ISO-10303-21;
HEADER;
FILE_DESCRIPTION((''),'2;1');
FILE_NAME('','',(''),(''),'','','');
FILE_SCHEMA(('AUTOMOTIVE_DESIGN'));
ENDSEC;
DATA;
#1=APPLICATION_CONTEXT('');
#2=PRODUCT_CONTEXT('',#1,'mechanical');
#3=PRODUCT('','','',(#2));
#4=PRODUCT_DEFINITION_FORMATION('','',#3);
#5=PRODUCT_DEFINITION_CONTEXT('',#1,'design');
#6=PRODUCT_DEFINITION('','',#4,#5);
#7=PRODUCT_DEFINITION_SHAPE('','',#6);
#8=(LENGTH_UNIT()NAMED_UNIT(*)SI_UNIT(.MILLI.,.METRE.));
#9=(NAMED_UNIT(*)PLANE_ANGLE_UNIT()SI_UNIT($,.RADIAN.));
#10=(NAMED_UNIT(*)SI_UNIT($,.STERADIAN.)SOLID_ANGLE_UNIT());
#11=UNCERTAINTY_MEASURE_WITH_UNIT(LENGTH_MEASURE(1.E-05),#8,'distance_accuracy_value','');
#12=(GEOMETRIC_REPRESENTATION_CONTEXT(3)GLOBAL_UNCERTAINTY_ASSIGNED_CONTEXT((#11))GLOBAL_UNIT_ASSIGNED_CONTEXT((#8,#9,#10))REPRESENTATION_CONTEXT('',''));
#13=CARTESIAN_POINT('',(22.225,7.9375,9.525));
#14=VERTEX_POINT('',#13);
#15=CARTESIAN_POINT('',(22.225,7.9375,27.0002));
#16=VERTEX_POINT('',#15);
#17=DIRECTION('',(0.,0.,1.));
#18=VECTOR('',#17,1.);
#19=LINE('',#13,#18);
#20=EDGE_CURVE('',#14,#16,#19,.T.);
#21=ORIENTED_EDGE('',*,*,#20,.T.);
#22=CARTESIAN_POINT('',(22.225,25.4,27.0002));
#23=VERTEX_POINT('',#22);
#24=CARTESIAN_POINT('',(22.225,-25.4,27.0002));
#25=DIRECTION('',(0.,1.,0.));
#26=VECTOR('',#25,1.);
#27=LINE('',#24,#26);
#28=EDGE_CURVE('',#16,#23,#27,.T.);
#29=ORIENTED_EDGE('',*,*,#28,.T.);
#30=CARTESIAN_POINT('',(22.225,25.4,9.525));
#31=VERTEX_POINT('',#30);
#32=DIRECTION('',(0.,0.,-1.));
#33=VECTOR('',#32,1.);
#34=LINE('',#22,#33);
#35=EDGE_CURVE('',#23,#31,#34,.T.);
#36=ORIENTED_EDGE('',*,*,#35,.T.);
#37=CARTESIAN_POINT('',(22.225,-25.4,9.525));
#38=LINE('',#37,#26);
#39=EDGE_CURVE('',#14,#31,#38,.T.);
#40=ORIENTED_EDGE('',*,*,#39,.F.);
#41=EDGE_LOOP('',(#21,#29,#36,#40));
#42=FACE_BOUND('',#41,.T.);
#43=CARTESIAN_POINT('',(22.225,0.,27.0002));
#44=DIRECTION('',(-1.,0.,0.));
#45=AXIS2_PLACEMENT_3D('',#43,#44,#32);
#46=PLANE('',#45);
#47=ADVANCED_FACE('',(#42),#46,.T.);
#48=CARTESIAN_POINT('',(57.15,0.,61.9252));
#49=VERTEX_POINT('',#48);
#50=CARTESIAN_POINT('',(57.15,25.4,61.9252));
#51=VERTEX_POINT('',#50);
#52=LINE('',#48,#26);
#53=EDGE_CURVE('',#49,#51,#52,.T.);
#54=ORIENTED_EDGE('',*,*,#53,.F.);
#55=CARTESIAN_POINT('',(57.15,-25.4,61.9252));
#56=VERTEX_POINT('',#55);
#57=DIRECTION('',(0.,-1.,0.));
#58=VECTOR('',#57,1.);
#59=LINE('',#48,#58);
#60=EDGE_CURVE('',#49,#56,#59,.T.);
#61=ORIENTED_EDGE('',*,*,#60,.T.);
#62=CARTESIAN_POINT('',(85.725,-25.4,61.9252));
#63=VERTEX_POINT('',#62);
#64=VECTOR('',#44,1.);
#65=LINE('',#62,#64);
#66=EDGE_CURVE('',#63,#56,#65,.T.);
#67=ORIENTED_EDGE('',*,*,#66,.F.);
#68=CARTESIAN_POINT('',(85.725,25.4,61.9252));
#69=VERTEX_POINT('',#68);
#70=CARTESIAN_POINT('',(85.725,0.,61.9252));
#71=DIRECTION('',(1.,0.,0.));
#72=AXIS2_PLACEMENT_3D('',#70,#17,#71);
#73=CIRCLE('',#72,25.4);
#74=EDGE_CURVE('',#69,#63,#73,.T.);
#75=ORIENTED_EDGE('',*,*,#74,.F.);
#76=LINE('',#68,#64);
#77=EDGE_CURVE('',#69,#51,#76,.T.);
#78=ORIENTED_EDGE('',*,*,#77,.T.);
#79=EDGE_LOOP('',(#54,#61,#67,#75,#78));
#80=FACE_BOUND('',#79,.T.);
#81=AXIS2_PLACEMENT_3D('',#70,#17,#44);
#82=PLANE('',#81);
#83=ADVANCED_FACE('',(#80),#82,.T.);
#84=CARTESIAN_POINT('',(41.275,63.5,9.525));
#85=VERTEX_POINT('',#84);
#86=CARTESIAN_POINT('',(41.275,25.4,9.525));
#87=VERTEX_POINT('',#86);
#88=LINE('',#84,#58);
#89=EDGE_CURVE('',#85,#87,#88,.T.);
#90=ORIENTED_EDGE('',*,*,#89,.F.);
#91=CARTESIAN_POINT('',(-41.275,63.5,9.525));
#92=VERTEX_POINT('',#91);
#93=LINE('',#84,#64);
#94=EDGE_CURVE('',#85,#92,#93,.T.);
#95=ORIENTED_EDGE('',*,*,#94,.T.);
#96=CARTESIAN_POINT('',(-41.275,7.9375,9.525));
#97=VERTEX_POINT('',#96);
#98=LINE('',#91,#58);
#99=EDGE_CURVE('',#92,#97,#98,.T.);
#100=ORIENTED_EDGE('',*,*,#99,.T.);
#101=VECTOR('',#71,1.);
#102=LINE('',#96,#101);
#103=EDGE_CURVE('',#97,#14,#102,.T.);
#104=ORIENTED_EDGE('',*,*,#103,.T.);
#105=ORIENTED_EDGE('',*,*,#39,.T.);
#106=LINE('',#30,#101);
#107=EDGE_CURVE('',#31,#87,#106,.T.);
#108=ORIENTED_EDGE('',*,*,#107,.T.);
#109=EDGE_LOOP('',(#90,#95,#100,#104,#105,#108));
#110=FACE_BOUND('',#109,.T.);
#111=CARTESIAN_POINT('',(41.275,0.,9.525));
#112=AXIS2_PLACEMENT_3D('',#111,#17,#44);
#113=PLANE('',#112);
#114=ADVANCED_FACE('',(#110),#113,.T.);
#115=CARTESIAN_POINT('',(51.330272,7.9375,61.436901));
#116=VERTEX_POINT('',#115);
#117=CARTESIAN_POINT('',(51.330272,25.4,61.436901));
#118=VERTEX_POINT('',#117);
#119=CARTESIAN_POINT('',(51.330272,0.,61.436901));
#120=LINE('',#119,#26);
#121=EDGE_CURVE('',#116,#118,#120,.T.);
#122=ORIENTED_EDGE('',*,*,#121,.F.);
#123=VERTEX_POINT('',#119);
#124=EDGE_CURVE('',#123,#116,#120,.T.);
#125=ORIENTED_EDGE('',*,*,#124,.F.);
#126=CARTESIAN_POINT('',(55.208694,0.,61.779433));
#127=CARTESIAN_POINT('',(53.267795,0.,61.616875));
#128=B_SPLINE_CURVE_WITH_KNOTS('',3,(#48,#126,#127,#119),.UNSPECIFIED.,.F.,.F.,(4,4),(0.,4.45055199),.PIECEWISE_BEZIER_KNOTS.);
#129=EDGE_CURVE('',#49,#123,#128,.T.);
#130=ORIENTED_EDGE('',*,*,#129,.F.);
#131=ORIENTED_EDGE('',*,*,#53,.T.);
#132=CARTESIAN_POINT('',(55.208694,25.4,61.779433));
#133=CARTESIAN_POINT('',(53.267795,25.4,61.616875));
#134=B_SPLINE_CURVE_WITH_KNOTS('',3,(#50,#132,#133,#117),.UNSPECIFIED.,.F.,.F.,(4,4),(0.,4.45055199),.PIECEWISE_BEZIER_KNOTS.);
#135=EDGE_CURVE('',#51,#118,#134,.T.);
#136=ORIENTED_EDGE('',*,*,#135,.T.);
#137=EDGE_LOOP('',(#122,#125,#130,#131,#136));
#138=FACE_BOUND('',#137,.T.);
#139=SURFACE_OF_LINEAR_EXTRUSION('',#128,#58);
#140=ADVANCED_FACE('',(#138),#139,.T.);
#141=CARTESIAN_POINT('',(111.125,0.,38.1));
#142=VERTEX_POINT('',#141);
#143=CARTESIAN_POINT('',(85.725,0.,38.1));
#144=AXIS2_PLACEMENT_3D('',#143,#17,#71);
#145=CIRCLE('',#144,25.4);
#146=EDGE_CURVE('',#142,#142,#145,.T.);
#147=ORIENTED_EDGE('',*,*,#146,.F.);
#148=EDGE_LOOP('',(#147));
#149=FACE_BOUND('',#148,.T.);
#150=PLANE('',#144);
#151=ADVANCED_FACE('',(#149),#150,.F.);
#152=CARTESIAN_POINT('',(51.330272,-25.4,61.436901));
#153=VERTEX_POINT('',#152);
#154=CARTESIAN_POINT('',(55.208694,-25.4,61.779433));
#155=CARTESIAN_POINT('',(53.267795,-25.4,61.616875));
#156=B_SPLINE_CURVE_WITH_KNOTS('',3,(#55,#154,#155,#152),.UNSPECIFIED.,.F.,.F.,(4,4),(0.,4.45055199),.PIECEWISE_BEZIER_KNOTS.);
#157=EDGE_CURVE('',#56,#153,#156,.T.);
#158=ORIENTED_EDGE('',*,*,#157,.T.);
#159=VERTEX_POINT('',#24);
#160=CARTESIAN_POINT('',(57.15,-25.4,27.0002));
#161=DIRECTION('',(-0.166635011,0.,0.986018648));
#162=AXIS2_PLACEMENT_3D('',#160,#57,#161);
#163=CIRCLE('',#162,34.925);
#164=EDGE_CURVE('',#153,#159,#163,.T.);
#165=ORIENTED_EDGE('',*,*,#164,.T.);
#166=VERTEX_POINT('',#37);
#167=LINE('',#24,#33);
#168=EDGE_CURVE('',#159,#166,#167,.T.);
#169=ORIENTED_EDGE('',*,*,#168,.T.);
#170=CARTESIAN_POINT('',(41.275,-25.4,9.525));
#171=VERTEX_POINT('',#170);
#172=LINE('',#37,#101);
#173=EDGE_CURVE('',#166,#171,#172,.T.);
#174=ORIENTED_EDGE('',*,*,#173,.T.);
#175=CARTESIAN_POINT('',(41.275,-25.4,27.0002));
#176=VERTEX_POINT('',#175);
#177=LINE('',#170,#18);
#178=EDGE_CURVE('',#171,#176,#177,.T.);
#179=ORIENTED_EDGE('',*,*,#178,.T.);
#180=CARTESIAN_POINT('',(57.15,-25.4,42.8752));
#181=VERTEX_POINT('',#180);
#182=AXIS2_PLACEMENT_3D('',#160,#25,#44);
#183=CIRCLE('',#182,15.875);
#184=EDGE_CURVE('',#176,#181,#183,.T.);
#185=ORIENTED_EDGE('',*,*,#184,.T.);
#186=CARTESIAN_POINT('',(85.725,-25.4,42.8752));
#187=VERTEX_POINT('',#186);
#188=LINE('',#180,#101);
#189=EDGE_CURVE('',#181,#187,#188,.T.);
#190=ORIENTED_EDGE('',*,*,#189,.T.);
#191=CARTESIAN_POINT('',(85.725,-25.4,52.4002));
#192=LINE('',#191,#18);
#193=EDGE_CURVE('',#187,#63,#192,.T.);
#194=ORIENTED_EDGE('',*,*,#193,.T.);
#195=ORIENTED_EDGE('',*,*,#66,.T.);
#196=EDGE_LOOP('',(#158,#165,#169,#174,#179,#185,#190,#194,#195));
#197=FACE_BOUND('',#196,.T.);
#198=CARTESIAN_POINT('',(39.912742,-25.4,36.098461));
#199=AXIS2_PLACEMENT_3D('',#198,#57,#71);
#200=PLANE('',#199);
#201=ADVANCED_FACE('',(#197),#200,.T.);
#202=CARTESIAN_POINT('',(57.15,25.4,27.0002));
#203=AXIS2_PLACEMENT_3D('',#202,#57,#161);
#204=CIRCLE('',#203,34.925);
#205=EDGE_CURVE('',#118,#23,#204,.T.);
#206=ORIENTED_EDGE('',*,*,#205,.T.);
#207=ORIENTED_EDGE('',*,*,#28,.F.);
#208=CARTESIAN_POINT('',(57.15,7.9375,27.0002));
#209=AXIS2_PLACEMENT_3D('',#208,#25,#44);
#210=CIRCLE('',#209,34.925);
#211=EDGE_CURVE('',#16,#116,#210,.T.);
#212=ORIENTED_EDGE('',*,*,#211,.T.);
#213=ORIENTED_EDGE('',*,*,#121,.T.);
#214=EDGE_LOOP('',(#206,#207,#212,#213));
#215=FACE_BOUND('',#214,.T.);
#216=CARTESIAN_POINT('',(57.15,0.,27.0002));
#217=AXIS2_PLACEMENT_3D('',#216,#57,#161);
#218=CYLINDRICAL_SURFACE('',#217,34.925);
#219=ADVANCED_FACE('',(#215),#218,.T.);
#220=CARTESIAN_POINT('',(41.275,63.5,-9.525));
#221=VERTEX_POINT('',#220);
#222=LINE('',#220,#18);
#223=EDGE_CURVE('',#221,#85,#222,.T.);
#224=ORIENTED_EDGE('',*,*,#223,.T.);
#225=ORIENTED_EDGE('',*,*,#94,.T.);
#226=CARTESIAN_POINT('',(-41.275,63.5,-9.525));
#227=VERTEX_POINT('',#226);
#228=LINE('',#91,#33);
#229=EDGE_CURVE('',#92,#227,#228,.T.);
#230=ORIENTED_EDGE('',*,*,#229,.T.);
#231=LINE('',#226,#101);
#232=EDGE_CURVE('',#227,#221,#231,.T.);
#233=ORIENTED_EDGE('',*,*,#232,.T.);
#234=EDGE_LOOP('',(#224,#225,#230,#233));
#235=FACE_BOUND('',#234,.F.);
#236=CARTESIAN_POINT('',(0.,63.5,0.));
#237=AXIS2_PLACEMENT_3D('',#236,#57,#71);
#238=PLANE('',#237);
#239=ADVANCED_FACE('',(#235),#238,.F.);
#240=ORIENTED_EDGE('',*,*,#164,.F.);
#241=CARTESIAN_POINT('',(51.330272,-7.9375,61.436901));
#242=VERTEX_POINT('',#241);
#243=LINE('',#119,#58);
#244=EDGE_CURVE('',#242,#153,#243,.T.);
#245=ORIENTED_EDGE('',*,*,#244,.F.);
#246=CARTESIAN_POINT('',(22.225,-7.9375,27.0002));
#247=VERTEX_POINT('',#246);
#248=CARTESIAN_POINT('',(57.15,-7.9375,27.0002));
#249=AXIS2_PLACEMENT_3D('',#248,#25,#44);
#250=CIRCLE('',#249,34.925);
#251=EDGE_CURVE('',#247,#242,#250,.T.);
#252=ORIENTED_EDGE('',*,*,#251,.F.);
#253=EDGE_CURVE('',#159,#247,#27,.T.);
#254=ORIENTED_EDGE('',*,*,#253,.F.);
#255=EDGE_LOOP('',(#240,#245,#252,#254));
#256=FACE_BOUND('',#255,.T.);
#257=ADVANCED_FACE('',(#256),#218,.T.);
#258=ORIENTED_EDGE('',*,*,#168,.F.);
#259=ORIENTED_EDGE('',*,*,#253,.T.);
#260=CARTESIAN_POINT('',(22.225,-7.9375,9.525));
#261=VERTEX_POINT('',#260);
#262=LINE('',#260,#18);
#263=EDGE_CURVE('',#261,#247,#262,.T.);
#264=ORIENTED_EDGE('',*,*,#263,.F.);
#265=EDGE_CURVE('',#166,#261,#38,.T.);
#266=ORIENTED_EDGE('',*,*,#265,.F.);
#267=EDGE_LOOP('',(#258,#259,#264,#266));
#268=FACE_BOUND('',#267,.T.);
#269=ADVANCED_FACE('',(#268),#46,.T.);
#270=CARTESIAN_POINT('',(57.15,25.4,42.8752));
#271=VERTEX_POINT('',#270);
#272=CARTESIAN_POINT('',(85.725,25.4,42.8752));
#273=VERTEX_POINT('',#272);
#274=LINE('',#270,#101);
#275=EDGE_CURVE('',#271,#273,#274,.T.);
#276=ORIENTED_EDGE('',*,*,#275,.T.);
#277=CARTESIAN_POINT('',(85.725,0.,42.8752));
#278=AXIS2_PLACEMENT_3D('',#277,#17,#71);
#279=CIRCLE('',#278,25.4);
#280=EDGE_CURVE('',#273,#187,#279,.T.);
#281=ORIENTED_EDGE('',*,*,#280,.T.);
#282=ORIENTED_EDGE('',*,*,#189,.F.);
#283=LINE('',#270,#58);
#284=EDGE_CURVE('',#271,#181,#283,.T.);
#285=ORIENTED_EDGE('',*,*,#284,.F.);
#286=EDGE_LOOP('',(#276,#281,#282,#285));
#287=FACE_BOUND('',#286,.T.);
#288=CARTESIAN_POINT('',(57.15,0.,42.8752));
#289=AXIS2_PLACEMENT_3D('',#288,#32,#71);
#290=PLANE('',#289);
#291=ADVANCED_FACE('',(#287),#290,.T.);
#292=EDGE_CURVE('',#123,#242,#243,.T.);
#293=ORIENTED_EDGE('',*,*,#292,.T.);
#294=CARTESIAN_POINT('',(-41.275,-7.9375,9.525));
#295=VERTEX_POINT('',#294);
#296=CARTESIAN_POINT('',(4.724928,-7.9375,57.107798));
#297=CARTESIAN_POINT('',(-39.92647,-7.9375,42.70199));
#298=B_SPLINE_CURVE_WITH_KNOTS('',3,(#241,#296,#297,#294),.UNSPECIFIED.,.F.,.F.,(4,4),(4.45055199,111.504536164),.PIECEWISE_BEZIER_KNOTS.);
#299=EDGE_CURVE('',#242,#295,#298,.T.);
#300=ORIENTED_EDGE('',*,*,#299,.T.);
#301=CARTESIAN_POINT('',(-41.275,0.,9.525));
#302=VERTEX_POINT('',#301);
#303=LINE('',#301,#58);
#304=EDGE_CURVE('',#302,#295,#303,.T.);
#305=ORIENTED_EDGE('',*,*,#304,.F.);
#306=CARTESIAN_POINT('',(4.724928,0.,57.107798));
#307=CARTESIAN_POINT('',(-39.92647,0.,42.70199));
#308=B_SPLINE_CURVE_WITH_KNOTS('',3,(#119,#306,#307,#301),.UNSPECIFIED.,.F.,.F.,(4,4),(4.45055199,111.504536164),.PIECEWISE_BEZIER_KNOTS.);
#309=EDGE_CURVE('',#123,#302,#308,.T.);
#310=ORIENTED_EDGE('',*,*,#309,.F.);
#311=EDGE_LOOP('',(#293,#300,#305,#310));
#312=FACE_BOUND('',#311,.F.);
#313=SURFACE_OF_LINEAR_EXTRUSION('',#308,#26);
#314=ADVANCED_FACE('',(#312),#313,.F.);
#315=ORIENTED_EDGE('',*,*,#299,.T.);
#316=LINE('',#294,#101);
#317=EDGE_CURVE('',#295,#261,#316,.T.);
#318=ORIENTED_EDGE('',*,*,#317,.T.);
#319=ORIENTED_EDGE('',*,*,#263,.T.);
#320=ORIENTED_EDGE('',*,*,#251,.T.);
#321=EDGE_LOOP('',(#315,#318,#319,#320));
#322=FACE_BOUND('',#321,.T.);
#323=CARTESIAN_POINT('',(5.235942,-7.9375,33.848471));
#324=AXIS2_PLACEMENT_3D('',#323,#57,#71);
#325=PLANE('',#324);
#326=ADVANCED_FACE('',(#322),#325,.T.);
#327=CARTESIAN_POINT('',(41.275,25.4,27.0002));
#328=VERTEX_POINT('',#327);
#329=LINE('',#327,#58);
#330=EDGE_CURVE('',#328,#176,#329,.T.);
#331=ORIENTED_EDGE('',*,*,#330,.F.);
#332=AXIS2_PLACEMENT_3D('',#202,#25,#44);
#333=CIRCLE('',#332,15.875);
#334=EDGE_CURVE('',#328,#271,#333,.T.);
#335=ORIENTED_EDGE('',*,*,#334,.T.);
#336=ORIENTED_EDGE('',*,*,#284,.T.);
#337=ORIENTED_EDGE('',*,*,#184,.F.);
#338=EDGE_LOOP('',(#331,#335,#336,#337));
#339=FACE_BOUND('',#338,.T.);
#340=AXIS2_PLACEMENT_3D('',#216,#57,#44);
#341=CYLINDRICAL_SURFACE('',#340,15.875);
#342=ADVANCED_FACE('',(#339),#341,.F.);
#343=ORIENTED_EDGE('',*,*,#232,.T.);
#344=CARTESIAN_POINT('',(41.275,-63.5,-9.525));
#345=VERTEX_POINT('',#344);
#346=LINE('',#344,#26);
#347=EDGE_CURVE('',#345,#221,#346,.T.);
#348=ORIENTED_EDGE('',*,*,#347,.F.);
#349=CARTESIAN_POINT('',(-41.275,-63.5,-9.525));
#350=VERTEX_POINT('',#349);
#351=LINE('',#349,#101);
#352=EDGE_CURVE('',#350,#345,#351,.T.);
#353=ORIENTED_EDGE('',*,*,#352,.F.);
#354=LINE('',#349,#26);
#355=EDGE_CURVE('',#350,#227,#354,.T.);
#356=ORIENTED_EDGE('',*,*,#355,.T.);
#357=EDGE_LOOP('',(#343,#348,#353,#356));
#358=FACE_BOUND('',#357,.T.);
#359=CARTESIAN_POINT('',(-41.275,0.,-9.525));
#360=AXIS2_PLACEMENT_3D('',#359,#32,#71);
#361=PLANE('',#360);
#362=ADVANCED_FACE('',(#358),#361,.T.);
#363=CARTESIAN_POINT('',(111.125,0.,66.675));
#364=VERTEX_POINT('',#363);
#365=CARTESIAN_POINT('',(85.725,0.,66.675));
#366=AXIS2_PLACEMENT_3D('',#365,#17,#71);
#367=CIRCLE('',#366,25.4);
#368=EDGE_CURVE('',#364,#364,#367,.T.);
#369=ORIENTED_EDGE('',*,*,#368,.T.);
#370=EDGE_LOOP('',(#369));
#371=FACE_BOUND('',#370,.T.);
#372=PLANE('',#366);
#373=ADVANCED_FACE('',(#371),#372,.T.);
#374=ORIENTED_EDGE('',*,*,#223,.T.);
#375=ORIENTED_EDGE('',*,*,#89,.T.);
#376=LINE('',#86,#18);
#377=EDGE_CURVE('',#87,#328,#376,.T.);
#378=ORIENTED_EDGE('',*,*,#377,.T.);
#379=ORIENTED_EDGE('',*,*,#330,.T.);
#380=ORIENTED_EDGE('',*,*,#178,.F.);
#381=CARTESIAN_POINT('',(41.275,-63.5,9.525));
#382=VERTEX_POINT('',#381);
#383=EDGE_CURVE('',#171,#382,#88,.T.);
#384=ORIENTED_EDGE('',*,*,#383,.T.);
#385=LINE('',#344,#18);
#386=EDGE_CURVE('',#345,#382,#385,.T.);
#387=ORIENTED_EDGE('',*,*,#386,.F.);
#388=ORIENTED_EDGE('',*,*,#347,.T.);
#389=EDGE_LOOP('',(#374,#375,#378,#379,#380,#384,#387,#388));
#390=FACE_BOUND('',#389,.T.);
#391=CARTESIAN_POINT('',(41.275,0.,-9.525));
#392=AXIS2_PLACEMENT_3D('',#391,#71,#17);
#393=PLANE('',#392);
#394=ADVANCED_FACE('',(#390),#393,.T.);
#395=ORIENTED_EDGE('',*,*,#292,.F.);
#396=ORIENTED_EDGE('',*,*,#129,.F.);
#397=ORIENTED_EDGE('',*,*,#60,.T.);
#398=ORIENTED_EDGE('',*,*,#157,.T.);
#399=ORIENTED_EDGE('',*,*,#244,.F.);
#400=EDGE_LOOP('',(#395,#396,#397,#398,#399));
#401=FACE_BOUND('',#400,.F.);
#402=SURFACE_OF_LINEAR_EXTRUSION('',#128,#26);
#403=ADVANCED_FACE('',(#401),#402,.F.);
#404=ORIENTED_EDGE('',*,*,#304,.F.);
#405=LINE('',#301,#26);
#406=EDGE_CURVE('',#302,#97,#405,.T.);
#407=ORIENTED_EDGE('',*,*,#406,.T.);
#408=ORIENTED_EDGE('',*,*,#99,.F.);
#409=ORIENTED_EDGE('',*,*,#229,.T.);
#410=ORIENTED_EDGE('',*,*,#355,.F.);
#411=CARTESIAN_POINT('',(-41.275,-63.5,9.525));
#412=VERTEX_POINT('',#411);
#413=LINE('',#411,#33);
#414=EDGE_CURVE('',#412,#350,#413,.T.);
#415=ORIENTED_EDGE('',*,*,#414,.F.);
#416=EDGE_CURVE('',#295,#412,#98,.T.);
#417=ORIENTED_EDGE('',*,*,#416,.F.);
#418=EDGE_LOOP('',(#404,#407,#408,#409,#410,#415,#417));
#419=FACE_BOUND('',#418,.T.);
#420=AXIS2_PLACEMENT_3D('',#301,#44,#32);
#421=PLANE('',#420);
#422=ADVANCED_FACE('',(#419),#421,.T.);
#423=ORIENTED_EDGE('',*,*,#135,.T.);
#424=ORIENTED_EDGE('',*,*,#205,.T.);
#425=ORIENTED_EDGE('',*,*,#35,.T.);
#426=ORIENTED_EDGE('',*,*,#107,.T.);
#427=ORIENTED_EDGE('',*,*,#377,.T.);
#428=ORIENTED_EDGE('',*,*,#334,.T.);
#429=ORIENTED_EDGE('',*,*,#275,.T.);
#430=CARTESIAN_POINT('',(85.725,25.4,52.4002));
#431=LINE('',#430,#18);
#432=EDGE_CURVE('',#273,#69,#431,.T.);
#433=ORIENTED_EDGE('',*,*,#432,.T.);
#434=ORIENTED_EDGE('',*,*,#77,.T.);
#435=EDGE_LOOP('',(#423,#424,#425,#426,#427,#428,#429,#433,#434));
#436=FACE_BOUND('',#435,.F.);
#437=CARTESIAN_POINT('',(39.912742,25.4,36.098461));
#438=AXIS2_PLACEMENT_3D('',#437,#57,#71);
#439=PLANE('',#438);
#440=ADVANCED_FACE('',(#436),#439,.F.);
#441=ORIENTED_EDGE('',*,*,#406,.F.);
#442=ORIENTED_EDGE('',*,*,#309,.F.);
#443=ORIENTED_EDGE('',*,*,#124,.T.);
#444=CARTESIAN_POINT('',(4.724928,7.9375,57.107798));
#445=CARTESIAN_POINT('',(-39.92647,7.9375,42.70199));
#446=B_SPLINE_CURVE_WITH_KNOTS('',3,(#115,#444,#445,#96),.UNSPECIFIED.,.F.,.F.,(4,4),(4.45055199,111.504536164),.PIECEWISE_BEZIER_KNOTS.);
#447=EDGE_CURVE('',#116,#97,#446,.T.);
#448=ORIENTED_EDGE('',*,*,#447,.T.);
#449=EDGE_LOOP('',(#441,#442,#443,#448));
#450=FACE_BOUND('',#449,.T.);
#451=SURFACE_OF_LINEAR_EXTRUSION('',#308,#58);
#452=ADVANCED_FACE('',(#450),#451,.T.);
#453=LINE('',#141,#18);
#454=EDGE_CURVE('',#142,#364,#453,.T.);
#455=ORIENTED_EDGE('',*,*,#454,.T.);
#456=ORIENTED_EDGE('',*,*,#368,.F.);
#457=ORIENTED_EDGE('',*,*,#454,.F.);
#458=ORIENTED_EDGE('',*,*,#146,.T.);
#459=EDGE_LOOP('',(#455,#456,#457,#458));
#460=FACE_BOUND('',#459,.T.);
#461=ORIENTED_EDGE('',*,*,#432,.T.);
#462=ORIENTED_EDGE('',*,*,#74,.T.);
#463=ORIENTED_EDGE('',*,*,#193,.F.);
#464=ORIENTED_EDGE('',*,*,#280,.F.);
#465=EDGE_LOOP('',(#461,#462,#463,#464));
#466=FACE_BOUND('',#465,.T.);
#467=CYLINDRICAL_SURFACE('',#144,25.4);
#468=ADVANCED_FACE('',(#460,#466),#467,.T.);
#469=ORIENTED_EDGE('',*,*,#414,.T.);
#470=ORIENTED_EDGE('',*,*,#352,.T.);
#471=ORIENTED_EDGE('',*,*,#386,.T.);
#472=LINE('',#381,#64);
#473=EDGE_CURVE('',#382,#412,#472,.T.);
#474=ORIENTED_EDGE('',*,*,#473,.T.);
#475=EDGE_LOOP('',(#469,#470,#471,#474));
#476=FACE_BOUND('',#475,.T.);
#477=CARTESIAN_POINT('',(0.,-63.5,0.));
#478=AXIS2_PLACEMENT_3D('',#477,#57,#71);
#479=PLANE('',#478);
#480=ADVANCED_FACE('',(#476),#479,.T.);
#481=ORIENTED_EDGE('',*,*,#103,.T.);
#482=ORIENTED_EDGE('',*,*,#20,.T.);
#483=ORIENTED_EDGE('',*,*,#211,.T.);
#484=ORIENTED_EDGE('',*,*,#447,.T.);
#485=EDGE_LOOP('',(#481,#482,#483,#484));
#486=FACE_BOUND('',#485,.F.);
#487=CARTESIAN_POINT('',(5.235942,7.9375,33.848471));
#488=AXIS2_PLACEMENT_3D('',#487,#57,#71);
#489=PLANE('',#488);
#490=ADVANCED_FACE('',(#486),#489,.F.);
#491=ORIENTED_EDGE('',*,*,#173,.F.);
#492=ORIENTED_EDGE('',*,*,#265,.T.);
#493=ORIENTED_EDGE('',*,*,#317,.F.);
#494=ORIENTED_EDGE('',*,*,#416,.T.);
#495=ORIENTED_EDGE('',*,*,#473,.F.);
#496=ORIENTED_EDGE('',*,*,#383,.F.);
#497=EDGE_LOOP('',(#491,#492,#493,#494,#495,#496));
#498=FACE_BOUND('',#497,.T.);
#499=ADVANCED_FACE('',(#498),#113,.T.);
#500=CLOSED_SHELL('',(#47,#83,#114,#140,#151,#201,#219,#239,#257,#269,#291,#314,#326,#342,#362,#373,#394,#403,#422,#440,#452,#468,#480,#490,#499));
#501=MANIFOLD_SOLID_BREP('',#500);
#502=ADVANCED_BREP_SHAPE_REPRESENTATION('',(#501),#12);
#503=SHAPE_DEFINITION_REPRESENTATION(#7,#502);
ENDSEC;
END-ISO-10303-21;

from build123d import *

# Parameters (mm, degrees)
F1_DEPTH = 63.5
F0_W     = 25.4
F0_H     = 19.05
F2_DEPTH = 25.4
F3_DEPTH = 7.9375


with BuildPart() as f1:
    # F0 (on Front) → F1 (new body, symmetric)
    with BuildSketch(Plane.XZ):
        Polygon((41.275, -9.525), (41.275, 9.525), (22.225, 9.525), (-41.275, 9.525), (-41.275, -9.525), align=None)
    extrude(amount=F1_DEPTH, both=True)

    # F0 (on Front) → F2 (join, symmetric)
    with BuildSketch(Plane.XZ):
        with BuildLine():
            Line((22.225, 9.525), (41.275, 9.525))
            Line((41.275, 9.525), (41.275, 27.0002))
            ThreePointArc((41.275, 27.0002), (45.9246798487, 38.2255201513), (57.15, 42.8752))
            Line((57.15, 42.8752), (60.325, 42.8752))
            Line((60.325, 42.8752), (60.325, 61.9252))
            Line((60.325, 61.9252), (57.15, 61.9252))
            add(Edge.make_bspline(
                [(57.15, 61.9252), (55.208694365, 61.7794329693), (53.2677947949, 61.6168749598), (51.3302722534, 61.4369012641)],
                knots=[0, 0, 0, 0, 4.4505519897, 4.4505519897, 4.4505519897, 4.4505519897], degree=3))
            ThreePointArc((51.3302722534, 61.4369012641), (30.4759525329, 49.5446187489), (22.225, 27.0002))
            Line((22.225, 27.0002), (22.225, 9.525))
        make_face()
        with Locations((73.025, 52.4002)):
            Rectangle(F0_W, F0_H)
    extrude(amount=F2_DEPTH, both=True)

    # F0 (on Front) → F3 (join, symmetric)
    with BuildSketch(Plane.XZ):
        with BuildLine():
            Line((-41.275, 9.525), (22.225, 9.525))
            Line((22.225, 9.525), (22.225, 27.0002))
            ThreePointArc((22.225, 27.0002), (30.4759525329, 49.5446187489), (51.3302722534, 61.4369012641))
            add(Edge.make_bspline(
                [(51.3302722534, 61.4369012641), (4.7249280234, 57.1077975465), (-39.9264698354, 42.7019898169), (-41.275, 9.525)],
                knots=[4.4505519897, 4.4505519897, 4.4505519897, 4.4505519897, 111.5045361635, 111.5045361635, 111.5045361635, 111.5045361635], degree=3))
        make_face()
    extrude(amount=F3_DEPTH, both=True)

    # F0 (on Front) → F4 (revolve)
    with BuildSketch(Plane.XZ):
        Polygon((85.725, 61.9252), (85.725, 42.8752), (85.725, 38.1), (111.125, 38.1), (111.125, 66.675), (85.725, 66.675), align=None)
    revolve(axis=Axis((85.725, 0, 52.3875), (0, 0, 1)))


solid = f1.part
